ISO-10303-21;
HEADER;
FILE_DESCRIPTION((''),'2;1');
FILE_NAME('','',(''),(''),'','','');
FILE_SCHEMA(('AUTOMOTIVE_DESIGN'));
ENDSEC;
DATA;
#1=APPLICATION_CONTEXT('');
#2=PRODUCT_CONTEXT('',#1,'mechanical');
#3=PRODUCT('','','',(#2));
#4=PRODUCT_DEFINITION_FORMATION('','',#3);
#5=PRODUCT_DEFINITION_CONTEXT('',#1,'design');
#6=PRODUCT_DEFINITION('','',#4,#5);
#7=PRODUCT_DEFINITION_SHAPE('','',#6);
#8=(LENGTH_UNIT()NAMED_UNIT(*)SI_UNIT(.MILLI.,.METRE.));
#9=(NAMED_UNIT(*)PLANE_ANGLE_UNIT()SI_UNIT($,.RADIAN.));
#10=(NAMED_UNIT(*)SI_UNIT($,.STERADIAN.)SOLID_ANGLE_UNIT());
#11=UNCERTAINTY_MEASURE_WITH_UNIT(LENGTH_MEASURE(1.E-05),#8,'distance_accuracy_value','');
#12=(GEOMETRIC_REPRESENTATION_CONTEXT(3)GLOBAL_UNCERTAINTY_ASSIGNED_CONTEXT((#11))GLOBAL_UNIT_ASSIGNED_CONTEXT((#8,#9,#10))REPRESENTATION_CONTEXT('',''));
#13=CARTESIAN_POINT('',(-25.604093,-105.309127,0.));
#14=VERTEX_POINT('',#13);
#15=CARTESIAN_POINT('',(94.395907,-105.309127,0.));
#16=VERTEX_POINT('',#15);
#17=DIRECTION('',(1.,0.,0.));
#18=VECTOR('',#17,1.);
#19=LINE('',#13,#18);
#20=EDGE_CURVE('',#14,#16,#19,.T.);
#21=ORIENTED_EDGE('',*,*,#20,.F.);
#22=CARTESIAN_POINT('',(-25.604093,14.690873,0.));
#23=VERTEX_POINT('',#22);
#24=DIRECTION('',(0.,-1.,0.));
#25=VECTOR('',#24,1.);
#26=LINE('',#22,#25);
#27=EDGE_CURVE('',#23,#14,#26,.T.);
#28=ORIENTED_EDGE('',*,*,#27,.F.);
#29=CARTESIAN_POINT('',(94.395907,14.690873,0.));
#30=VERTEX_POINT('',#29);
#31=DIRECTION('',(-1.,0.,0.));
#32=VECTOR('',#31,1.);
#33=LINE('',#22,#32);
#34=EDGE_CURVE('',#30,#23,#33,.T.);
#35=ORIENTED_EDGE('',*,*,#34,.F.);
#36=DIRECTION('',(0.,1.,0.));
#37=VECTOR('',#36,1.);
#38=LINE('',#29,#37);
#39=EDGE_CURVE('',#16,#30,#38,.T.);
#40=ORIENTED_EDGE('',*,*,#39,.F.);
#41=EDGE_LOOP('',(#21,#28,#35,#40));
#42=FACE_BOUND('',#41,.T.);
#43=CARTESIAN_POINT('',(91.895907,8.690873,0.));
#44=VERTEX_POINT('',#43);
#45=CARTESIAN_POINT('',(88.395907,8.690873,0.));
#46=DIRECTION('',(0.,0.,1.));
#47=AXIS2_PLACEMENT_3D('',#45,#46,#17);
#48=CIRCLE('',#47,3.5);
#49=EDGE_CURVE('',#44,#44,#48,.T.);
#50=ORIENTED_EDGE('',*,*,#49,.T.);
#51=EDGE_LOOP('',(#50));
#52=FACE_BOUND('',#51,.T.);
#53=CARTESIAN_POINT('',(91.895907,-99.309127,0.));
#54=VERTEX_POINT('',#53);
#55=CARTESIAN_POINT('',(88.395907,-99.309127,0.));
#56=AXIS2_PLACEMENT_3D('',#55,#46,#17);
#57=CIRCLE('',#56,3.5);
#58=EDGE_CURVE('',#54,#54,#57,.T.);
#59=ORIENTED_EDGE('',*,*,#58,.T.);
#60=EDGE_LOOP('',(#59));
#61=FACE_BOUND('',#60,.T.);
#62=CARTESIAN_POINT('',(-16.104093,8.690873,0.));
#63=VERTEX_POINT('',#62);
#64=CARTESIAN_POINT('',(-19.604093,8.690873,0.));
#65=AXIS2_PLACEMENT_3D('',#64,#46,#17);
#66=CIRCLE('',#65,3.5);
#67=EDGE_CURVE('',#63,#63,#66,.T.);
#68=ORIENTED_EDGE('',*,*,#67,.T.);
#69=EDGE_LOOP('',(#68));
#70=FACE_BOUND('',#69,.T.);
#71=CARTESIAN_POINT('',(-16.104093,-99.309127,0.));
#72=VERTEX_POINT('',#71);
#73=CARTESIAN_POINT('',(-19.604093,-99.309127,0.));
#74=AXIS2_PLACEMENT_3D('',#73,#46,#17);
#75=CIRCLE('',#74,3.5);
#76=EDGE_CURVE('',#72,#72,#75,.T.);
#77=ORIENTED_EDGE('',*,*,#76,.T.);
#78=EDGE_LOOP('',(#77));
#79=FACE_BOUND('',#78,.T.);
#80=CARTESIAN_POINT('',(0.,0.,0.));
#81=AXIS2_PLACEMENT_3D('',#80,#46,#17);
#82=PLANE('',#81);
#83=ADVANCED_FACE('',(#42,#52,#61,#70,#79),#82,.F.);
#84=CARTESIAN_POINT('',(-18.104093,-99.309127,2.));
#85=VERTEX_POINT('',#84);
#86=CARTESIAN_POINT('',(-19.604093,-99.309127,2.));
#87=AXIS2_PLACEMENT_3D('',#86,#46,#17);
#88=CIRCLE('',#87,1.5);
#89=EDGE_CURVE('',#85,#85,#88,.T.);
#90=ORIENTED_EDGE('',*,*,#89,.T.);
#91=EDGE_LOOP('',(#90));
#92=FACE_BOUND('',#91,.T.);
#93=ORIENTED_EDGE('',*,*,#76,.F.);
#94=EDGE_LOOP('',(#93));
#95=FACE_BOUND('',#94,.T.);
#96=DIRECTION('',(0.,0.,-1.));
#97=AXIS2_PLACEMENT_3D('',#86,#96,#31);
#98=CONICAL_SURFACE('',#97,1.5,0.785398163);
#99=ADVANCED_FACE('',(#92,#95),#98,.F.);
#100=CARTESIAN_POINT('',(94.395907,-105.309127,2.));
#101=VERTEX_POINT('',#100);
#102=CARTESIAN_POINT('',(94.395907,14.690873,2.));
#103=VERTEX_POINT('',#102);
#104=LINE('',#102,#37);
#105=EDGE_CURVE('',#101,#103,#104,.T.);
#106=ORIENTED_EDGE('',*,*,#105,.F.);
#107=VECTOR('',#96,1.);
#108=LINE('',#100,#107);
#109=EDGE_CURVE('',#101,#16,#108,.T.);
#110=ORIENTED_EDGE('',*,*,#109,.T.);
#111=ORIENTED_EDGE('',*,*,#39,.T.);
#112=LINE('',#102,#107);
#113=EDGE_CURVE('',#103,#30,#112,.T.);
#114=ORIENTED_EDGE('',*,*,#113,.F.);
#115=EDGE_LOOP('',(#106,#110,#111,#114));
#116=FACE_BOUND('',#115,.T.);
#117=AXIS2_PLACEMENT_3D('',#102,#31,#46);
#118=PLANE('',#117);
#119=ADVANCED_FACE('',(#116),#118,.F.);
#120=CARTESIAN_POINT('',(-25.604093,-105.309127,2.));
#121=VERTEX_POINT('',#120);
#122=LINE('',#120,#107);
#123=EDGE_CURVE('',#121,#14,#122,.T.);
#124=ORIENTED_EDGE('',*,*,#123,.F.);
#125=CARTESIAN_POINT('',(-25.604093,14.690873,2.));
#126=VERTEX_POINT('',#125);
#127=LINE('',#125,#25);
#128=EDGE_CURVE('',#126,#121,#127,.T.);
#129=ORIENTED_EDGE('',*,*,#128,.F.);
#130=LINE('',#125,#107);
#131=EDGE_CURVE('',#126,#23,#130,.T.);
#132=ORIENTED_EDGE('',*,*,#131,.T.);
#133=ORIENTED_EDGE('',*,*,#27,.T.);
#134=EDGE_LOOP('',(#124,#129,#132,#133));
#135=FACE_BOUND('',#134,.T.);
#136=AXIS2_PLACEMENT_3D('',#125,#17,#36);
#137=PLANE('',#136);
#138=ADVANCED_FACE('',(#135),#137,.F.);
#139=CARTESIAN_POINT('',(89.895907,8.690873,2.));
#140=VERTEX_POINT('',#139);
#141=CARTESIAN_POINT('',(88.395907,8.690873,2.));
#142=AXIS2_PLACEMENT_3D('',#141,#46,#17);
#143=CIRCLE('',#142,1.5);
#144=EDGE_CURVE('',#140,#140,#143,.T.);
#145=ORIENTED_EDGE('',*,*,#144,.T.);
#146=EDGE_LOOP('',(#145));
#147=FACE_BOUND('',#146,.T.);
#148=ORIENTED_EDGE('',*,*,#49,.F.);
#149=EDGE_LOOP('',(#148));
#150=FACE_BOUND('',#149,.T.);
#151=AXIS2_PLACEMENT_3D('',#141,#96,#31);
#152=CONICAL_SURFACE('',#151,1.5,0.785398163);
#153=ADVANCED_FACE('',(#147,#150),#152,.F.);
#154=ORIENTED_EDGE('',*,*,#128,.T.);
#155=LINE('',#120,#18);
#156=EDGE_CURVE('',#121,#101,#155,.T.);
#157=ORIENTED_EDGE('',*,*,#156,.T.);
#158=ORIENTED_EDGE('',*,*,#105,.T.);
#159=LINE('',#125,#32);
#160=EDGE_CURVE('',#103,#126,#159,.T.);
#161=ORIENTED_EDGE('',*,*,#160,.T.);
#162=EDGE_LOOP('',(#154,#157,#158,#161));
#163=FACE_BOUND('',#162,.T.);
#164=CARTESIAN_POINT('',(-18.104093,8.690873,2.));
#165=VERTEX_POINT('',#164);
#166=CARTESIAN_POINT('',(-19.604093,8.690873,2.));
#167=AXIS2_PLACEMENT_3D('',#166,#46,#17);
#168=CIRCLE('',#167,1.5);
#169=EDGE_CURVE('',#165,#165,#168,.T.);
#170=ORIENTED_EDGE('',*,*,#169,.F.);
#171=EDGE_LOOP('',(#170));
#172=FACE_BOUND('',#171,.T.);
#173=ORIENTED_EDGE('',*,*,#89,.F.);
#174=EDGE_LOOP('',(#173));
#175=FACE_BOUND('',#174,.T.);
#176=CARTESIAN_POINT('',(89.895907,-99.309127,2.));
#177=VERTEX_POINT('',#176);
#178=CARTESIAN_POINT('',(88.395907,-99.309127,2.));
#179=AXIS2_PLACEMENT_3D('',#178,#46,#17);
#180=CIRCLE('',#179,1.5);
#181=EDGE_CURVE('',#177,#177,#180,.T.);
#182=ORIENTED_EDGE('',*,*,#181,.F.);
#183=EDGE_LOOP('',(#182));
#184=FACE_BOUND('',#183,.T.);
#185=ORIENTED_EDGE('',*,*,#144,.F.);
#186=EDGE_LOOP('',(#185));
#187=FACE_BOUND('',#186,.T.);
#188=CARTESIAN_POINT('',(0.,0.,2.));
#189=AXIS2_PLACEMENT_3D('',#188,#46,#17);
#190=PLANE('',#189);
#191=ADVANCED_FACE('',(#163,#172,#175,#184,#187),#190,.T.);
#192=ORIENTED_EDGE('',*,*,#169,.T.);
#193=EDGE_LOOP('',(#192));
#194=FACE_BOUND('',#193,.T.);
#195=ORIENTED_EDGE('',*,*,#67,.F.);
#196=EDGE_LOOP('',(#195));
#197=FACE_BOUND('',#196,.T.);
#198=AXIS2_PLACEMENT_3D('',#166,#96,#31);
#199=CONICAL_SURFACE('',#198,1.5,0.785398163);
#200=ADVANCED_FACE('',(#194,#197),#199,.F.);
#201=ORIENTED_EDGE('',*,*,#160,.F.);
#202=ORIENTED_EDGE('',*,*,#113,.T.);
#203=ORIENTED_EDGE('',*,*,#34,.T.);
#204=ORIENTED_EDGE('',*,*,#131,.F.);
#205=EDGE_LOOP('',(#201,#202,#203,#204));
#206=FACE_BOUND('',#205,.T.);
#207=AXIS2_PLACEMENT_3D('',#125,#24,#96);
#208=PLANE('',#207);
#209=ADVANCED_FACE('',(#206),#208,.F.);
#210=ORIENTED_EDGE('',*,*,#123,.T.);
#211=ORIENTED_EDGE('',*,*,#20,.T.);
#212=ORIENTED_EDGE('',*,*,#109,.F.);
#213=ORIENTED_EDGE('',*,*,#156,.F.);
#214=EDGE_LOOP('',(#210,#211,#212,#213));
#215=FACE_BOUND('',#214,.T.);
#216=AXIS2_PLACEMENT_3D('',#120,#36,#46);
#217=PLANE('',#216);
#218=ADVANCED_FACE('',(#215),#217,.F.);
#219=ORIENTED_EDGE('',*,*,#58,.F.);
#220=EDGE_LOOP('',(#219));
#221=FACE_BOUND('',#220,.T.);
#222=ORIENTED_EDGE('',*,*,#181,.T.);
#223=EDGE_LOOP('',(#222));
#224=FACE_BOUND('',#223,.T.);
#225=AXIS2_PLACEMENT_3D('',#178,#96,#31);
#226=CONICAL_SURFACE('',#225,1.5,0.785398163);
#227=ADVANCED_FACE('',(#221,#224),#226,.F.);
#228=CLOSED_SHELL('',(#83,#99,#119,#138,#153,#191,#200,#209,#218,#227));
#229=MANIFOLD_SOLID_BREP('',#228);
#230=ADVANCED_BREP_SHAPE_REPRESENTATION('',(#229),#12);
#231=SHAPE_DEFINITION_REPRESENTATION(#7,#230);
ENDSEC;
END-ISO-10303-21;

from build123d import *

# Parameters (mm, degrees)
SKETCH1_W           = 120
SKETCH1_H           = 120
BOSS_EXTRUDE1_DEPTH = 2
SKETCH2_R           = 1.5
CUT_EXTRUDE1_DEPTH  = 3
CHAMFER1_SIZE       = 2


with BuildPart() as part:
    # Sketch1 → Boss-Extrude1 (new body)
    with BuildSketch(Plane.XY):
        with Locations((34.39590661, -45.309126743)):
            Rectangle(SKETCH1_W, SKETCH1_H)
    extrude(amount=BOSS_EXTRUDE1_DEPTH)

    # Sketch2 → Cut-Extrude1 (cut)
    with BuildSketch(Plane(origin=(0, 0, 0), x_dir=(-1, 0, 0), z_dir=(0, 0, -1))):
        with Locations((-88.39590661, -99.309126743)):
            Circle(SKETCH2_R)
        with Locations(Location((19.60409339, -99.309126743, 0), (0, 0, 180))):
            Circle(SKETCH2_R)
        with Locations((19.60409339, 8.690873257)):
            Circle(SKETCH2_R)
        with Locations(Location((-88.39590661, 8.690873257, 0), (0, 0, 180))):
            Circle(SKETCH2_R)
    extrude(amount=-CUT_EXTRUDE1_DEPTH, mode=Mode.SUBTRACT)

    # Chamfer1
    chamfer1_edges = [part.edges().sort_by_distance(p)[0] for p in [
        (89.89590661, -99.309126743, 0),
        (-21.10409339, -99.309126743, 0),
        (-18.10409339, 8.690873257, 0),
        (86.89590661, 8.690873257, 0),
    ]]
    chamfer(chamfer1_edges, length=CHAMFER1_SIZE - 0.0001)  # a hair under: the kernel refuses the full size


solid = part.part
